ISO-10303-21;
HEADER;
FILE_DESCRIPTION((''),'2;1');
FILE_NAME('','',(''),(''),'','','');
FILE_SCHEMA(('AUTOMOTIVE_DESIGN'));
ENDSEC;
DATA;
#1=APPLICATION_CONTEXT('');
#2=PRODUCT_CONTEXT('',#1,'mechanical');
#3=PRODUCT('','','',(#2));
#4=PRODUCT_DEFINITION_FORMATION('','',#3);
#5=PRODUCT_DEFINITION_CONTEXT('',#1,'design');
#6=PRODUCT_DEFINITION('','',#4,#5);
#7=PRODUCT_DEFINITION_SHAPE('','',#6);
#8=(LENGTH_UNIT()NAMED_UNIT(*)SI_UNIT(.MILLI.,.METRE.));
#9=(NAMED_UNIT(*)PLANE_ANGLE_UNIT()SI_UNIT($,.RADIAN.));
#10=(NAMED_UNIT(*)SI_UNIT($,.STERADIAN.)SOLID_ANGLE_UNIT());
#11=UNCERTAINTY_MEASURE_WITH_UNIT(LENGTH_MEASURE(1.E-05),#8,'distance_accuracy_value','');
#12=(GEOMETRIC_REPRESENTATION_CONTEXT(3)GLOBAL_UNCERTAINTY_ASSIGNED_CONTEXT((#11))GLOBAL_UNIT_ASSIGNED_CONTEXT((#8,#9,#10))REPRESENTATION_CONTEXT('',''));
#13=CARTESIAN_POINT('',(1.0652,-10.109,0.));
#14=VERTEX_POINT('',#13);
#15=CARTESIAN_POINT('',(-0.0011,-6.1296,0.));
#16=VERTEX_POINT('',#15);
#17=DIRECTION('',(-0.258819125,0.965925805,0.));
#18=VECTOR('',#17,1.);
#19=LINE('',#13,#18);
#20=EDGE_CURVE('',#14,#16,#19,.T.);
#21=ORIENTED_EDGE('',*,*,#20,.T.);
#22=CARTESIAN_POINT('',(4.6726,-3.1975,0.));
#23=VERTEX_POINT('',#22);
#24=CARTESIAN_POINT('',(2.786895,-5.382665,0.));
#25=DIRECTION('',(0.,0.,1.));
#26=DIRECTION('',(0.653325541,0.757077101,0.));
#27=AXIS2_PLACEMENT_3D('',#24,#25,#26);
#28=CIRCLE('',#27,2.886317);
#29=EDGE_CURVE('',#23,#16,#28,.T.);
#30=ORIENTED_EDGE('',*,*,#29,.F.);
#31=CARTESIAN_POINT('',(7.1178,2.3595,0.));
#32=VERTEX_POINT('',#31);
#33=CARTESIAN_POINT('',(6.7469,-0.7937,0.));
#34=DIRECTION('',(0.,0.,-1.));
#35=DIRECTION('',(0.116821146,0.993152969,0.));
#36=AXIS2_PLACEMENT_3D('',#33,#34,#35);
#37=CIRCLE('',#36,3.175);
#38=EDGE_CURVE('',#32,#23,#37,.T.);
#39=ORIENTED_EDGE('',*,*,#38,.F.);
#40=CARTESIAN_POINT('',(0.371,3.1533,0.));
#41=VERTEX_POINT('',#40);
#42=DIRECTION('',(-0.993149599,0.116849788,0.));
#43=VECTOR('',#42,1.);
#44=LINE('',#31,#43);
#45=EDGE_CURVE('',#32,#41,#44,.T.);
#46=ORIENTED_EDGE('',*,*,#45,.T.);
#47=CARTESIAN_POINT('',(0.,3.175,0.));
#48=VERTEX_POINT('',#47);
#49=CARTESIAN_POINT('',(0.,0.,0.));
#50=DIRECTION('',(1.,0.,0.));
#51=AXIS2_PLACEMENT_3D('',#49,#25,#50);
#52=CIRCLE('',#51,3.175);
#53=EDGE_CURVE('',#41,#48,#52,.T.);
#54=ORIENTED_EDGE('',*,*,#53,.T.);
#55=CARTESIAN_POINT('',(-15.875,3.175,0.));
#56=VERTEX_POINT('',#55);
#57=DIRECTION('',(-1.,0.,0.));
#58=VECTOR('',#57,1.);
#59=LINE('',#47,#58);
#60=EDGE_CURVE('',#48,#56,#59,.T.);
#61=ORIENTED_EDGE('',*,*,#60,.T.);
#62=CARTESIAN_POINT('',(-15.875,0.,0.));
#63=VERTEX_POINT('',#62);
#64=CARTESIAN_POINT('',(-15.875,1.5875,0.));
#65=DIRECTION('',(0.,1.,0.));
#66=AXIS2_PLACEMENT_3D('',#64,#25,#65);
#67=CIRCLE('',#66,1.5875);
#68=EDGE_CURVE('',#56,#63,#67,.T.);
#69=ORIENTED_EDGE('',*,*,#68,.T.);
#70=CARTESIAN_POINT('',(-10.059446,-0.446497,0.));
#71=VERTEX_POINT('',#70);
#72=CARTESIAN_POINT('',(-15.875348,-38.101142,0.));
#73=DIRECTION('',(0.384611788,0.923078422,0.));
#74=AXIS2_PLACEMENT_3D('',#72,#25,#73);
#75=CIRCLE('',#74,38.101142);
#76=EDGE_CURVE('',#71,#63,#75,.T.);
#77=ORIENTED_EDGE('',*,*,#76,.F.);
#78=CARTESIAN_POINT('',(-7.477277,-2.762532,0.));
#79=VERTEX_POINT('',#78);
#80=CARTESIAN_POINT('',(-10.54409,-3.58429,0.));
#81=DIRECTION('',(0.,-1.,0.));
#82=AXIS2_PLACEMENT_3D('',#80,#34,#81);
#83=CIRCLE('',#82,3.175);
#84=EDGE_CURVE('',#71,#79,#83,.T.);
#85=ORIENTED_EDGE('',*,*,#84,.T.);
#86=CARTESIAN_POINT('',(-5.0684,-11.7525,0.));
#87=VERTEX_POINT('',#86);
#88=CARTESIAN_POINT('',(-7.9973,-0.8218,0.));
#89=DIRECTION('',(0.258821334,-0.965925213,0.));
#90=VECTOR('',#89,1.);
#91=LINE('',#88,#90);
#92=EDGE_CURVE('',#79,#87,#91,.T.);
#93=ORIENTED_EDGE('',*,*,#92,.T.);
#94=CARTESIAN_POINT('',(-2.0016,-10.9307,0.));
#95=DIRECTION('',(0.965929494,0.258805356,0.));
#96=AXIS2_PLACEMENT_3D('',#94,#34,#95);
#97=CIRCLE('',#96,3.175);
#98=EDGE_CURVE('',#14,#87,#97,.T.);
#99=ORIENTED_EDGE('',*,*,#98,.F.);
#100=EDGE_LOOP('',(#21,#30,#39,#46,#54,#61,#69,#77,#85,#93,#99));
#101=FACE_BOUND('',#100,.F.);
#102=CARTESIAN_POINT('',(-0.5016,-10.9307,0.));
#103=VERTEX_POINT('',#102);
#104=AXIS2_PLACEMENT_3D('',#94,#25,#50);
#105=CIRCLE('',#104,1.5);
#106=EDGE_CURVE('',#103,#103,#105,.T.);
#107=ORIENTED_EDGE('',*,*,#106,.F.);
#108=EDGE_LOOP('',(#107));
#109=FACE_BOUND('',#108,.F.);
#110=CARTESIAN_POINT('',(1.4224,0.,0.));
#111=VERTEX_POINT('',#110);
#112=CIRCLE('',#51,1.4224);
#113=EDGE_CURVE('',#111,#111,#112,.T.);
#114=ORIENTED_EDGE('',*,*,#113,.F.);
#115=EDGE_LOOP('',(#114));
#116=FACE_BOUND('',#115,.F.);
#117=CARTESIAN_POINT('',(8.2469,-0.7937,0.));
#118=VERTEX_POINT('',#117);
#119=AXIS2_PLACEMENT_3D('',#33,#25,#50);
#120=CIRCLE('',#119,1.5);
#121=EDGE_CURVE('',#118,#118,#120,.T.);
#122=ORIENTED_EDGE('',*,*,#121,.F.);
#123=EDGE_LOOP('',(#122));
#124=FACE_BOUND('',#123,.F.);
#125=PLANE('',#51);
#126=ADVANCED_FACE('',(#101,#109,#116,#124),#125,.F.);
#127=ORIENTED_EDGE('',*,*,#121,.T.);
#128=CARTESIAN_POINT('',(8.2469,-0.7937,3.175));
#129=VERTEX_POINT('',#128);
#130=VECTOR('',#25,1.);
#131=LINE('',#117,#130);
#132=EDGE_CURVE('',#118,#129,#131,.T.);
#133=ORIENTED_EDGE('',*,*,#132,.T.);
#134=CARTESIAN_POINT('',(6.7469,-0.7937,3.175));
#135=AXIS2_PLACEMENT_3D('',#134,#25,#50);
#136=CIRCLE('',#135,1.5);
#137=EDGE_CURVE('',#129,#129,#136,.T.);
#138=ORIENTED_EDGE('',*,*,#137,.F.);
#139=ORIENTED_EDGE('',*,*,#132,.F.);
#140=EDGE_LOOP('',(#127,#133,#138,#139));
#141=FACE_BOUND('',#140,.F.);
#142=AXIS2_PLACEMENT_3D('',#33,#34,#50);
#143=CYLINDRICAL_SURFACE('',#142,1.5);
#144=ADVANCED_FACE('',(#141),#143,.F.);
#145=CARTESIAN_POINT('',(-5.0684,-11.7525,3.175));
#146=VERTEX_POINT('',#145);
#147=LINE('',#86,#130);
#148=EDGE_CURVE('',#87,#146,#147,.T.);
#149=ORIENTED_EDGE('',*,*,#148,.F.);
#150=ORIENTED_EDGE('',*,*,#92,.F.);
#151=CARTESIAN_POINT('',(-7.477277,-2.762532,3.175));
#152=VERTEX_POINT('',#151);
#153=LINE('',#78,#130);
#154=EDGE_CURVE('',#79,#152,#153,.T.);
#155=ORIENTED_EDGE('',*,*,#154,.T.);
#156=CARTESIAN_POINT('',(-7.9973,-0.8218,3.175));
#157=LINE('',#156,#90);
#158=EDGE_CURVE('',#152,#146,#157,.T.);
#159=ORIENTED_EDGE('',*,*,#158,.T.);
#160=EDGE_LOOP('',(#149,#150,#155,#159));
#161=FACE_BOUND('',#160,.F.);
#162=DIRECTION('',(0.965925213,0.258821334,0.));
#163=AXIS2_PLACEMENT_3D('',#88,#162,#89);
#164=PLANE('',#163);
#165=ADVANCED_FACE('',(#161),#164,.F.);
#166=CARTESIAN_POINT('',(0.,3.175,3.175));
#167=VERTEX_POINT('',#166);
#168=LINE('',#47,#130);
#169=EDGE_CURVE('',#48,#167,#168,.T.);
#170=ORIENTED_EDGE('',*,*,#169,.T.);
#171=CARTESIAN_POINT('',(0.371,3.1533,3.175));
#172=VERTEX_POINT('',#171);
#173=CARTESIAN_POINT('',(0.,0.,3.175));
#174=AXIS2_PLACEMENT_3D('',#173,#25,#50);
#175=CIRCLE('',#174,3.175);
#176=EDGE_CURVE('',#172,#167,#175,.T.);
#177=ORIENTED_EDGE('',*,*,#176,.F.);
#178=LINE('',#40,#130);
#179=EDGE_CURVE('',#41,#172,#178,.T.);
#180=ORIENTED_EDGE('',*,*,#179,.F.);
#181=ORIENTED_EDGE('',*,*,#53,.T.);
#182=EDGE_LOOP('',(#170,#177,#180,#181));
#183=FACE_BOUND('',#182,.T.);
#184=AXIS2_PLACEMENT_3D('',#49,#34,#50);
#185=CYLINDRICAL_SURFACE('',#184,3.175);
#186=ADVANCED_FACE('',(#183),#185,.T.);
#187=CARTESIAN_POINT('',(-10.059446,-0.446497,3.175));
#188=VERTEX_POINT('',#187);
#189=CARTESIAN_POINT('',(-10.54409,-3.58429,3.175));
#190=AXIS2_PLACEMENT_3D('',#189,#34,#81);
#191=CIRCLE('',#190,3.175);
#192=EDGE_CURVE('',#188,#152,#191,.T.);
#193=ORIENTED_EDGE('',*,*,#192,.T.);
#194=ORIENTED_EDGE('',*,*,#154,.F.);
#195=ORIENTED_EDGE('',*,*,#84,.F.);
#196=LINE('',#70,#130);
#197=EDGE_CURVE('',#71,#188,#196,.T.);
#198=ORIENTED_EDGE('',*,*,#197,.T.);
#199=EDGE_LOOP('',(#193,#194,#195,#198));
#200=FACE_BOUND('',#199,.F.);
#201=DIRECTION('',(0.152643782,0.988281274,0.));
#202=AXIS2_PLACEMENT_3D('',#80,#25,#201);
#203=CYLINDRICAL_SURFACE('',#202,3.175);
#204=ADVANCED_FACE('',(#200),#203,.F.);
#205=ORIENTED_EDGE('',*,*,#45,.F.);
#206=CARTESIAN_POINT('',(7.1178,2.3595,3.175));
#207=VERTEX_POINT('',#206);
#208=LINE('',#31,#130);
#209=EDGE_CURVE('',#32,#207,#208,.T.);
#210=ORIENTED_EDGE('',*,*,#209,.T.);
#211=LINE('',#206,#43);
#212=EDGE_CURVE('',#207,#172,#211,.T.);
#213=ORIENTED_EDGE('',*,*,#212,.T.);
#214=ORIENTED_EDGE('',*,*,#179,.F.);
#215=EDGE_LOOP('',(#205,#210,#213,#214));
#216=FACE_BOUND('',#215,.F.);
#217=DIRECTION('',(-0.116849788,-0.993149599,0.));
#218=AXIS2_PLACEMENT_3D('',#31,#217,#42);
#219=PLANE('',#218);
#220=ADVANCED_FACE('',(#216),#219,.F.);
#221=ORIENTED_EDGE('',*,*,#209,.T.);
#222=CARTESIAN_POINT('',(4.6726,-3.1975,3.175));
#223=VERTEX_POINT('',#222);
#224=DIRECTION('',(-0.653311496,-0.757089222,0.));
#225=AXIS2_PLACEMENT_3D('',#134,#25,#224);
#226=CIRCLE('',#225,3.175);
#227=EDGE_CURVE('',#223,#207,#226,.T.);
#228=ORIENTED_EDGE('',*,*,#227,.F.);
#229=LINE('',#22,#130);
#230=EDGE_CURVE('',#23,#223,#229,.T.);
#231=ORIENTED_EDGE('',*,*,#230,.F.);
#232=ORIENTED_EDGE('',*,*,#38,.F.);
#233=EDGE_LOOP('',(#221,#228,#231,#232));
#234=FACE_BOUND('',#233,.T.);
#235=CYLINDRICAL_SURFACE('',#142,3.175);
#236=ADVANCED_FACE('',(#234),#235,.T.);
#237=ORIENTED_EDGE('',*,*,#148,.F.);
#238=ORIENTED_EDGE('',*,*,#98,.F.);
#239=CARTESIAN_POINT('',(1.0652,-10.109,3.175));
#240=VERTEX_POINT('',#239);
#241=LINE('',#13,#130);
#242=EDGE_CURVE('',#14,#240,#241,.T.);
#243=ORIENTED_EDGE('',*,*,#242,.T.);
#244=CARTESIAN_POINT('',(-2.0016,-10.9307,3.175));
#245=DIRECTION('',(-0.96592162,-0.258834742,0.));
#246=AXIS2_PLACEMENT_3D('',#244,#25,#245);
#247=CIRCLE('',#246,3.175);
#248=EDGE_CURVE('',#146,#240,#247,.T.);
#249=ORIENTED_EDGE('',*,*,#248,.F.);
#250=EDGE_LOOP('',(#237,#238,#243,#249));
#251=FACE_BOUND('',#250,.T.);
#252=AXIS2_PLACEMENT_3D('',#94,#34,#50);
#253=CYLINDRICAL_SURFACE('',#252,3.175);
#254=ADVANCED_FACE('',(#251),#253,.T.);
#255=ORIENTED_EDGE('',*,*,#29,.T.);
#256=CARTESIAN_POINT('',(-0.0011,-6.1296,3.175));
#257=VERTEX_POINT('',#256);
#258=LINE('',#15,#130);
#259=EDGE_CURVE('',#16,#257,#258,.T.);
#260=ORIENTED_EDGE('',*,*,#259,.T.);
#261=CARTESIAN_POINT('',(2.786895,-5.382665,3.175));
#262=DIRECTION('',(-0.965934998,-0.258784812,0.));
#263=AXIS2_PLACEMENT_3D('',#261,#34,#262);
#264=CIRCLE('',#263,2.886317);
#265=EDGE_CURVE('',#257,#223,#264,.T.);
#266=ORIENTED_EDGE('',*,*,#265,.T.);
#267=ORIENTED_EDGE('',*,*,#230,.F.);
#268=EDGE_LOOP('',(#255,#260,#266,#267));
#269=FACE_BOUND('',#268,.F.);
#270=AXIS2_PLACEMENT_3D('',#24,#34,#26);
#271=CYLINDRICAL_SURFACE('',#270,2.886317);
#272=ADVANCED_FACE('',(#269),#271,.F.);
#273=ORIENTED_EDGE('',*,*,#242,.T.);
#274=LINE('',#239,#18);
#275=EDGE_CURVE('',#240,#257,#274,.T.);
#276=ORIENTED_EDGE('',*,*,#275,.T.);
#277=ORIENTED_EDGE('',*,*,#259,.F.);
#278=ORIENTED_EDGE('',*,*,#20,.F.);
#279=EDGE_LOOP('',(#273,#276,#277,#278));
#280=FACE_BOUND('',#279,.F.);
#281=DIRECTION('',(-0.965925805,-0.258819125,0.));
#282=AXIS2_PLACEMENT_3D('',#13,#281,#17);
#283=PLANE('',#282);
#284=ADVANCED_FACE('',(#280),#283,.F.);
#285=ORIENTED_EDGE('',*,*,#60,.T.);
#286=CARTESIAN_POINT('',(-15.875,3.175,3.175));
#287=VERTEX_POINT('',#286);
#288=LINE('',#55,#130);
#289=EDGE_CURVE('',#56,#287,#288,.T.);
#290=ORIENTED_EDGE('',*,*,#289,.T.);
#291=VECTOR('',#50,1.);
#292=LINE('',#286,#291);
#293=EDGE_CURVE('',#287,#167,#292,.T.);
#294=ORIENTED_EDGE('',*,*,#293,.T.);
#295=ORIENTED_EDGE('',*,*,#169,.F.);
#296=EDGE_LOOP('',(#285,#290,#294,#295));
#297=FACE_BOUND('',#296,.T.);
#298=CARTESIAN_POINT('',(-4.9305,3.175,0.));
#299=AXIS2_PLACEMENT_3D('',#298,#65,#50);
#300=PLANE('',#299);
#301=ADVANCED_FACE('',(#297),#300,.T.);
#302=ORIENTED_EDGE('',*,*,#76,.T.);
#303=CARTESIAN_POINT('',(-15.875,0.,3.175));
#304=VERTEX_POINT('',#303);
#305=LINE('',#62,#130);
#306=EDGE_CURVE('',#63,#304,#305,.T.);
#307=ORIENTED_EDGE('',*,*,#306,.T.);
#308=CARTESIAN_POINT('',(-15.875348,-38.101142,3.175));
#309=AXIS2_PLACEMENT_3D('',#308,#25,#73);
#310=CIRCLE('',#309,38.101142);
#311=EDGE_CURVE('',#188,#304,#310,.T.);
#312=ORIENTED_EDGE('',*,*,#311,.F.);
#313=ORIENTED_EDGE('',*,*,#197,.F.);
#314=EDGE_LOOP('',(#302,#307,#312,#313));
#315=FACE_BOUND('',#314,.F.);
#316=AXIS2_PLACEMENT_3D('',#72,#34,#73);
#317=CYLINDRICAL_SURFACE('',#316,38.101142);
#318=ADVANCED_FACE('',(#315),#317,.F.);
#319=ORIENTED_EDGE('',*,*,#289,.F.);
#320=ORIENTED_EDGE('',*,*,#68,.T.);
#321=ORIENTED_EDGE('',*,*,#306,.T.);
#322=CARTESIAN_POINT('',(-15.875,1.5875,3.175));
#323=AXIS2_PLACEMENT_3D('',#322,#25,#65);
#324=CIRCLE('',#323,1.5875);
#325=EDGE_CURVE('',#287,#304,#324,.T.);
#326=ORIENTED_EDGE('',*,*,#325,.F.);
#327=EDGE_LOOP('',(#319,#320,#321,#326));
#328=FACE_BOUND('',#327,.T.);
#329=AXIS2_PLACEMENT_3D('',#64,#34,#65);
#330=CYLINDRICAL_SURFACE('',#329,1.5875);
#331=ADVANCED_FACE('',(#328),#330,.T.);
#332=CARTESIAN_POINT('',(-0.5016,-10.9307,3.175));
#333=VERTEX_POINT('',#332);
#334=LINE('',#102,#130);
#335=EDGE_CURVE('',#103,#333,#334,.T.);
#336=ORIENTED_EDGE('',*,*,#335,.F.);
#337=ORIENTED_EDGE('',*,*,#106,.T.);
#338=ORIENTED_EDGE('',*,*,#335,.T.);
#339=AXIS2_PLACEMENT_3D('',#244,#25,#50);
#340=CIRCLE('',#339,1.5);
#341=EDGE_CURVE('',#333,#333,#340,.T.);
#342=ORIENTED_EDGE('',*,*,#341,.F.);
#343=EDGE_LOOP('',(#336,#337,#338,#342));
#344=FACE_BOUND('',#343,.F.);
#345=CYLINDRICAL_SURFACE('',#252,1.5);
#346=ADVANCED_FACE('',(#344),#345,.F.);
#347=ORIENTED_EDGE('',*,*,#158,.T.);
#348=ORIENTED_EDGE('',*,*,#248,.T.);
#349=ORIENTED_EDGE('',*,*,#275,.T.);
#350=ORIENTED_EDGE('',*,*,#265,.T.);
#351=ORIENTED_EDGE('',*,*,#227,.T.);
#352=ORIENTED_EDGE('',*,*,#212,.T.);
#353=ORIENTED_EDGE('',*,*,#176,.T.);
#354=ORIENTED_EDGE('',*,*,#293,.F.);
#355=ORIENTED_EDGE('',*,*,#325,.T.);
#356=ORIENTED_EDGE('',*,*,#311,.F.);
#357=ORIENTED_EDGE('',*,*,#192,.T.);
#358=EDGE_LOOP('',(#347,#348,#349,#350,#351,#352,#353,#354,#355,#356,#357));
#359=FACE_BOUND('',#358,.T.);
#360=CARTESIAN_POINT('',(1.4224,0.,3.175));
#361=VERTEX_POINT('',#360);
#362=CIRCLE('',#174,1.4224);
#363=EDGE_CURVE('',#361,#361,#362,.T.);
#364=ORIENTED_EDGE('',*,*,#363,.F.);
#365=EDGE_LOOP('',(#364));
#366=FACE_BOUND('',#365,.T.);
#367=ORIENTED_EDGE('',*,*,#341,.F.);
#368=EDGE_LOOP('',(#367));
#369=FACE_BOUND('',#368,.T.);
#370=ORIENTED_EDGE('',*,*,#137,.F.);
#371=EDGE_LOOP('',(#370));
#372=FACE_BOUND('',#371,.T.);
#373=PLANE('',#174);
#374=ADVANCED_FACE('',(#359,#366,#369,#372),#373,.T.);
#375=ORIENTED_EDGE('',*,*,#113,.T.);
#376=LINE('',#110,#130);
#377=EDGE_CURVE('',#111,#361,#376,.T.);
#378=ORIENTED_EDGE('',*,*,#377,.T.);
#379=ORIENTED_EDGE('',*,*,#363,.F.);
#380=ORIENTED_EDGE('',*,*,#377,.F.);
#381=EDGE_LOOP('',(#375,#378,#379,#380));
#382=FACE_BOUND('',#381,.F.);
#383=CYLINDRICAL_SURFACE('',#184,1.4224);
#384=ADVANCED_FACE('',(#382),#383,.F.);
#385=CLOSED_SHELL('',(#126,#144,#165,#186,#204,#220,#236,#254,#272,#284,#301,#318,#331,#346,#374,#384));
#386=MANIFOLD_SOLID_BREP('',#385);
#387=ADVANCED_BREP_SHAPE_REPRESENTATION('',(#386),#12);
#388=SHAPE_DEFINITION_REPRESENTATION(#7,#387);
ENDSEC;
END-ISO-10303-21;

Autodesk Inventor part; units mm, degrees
ref_plane "YZ Plane" through (0, 0, 0) normal (1, 0, 0) x (0, 1, 0)
ref_plane "XZ Plane" through (0, 0, 0) normal (0, 1, 0) x (-1, 0, 0)
ref_plane "XY Plane" through (0, 0, 0) normal (0, 0, 1) x (1, 0, 0)
sketch "Sketch1" plane through (0, 0, 0) normal (0, 0, 1) x (1, 0, 0)
  circle A0 centre (0, 0) radius 1.4224
  circle A1 centre (0, 0) radius 3.175
  line L0 (0, 0) -> (-15.875, 0) construction
  circle A2 centre (-2.0016, -10.9307) radius 3.175
  circle A3 centre (-2.0016, -10.9307) radius 5 construction
  circle A4 centre (-2.0016, -10.9307) radius 1.5
  line L1 (0, 0) -> (-2.0016, -10.9307) construction
  line L2 (-2.0016, -10.9307) -> (-3.4771, -10.6606) construction
  line L3 (0, 0) -> (-2.0016, -10.9307) construction
  arc A5 (-5.0684, -10.109) -> (1.0652, -11.7525) centre (-2.0016, -10.9307) ccw
  arc A6 (-1.2212, -2.9308) -> (-15.875, 0) centre (-15.875, -38.1) ccw
  arc A7 (-15.875, 3.175) -> (-15.875, 0) centre (-15.875, 1.5875) ccw
  line L4 (-15.875, 3.175) -> (0, 3.175)
  line L5 (-2.0016, -10.9307) -> (-4.9305, 0) construction
  line L6 (1.0652, -10.109) -> (-1.8637, 0.8218)
  line L7 (-7.9973, -0.8218) -> (-5.0684, -11.7525)
  arc A8 (-5.0684, -11.7525) -> (1.0652, -10.109) centre (-2.0016, -10.9307) ccw
  arc A9 (-1.8637, 0.8218) -> (-7.9973, -0.8218) centre (-4.9305, 0) ccw
  circle A10 centre (6.7469, -0.7937) radius 3.175
  circle A11 centre (6.7469, -0.7937) radius 1.5
  line L8 (7.1178, 2.3595) -> (0.371, 3.1533)
  arc A12 (4.6726, -3.1975) -> (-0.0011, -6.1296) centre (2.7869, -5.3826) ccw
  circle A13 centre (6.7469, -0.7937) radius 5 construction
  point P0 (-5.0684, -10.109)
  point P1 (0, 3.175)
  point P2 (-7.9969, -0.8234)
  point P3 (1.0652, -10.109)
  point P4 (-0.8218, -3.0668)
  point P5 (-2.4653, 2.0008)
  point P6 (0.6312, -3.1116)
  point P7 (1.4598, -2.8195)
  point P8 (-1.4243, -1.0642)
  point P9 (-1.7024, 0.5129)
  point P10 (1.0652, -10.109)
  point P11 (-5.0684, -11.7525)
  dimension "d24" = 3
  dimension "d0" = 2.8448
  dimension "d1" = 6.35
  dimension "d9" = 15.875
  dimension "d22" = 6.35
  dimension "d23" = 10
  dimension "Arm_Length" = 11.1125
  dimension "d29" = 3.175
  dimension "d30" = 6.35
  dimension "d31" = 6.35
  dimension "d32" = 3
  dimension "d36" = 10
  dimension "Arm_Angle" = 105
  dimension "d38" = 4.7625
  dimension "d39" = 6.7469
  dimension "d40" = 0.7937
extrude "Extrusion1" add sketch "Sketch1" along normal blind 3.175
fillet "Fillet1" radius 3.175 1 edges at (-7.9969, -0.8234, 1.5875)
properties part number "Lever" material "Aluminum 6061"
